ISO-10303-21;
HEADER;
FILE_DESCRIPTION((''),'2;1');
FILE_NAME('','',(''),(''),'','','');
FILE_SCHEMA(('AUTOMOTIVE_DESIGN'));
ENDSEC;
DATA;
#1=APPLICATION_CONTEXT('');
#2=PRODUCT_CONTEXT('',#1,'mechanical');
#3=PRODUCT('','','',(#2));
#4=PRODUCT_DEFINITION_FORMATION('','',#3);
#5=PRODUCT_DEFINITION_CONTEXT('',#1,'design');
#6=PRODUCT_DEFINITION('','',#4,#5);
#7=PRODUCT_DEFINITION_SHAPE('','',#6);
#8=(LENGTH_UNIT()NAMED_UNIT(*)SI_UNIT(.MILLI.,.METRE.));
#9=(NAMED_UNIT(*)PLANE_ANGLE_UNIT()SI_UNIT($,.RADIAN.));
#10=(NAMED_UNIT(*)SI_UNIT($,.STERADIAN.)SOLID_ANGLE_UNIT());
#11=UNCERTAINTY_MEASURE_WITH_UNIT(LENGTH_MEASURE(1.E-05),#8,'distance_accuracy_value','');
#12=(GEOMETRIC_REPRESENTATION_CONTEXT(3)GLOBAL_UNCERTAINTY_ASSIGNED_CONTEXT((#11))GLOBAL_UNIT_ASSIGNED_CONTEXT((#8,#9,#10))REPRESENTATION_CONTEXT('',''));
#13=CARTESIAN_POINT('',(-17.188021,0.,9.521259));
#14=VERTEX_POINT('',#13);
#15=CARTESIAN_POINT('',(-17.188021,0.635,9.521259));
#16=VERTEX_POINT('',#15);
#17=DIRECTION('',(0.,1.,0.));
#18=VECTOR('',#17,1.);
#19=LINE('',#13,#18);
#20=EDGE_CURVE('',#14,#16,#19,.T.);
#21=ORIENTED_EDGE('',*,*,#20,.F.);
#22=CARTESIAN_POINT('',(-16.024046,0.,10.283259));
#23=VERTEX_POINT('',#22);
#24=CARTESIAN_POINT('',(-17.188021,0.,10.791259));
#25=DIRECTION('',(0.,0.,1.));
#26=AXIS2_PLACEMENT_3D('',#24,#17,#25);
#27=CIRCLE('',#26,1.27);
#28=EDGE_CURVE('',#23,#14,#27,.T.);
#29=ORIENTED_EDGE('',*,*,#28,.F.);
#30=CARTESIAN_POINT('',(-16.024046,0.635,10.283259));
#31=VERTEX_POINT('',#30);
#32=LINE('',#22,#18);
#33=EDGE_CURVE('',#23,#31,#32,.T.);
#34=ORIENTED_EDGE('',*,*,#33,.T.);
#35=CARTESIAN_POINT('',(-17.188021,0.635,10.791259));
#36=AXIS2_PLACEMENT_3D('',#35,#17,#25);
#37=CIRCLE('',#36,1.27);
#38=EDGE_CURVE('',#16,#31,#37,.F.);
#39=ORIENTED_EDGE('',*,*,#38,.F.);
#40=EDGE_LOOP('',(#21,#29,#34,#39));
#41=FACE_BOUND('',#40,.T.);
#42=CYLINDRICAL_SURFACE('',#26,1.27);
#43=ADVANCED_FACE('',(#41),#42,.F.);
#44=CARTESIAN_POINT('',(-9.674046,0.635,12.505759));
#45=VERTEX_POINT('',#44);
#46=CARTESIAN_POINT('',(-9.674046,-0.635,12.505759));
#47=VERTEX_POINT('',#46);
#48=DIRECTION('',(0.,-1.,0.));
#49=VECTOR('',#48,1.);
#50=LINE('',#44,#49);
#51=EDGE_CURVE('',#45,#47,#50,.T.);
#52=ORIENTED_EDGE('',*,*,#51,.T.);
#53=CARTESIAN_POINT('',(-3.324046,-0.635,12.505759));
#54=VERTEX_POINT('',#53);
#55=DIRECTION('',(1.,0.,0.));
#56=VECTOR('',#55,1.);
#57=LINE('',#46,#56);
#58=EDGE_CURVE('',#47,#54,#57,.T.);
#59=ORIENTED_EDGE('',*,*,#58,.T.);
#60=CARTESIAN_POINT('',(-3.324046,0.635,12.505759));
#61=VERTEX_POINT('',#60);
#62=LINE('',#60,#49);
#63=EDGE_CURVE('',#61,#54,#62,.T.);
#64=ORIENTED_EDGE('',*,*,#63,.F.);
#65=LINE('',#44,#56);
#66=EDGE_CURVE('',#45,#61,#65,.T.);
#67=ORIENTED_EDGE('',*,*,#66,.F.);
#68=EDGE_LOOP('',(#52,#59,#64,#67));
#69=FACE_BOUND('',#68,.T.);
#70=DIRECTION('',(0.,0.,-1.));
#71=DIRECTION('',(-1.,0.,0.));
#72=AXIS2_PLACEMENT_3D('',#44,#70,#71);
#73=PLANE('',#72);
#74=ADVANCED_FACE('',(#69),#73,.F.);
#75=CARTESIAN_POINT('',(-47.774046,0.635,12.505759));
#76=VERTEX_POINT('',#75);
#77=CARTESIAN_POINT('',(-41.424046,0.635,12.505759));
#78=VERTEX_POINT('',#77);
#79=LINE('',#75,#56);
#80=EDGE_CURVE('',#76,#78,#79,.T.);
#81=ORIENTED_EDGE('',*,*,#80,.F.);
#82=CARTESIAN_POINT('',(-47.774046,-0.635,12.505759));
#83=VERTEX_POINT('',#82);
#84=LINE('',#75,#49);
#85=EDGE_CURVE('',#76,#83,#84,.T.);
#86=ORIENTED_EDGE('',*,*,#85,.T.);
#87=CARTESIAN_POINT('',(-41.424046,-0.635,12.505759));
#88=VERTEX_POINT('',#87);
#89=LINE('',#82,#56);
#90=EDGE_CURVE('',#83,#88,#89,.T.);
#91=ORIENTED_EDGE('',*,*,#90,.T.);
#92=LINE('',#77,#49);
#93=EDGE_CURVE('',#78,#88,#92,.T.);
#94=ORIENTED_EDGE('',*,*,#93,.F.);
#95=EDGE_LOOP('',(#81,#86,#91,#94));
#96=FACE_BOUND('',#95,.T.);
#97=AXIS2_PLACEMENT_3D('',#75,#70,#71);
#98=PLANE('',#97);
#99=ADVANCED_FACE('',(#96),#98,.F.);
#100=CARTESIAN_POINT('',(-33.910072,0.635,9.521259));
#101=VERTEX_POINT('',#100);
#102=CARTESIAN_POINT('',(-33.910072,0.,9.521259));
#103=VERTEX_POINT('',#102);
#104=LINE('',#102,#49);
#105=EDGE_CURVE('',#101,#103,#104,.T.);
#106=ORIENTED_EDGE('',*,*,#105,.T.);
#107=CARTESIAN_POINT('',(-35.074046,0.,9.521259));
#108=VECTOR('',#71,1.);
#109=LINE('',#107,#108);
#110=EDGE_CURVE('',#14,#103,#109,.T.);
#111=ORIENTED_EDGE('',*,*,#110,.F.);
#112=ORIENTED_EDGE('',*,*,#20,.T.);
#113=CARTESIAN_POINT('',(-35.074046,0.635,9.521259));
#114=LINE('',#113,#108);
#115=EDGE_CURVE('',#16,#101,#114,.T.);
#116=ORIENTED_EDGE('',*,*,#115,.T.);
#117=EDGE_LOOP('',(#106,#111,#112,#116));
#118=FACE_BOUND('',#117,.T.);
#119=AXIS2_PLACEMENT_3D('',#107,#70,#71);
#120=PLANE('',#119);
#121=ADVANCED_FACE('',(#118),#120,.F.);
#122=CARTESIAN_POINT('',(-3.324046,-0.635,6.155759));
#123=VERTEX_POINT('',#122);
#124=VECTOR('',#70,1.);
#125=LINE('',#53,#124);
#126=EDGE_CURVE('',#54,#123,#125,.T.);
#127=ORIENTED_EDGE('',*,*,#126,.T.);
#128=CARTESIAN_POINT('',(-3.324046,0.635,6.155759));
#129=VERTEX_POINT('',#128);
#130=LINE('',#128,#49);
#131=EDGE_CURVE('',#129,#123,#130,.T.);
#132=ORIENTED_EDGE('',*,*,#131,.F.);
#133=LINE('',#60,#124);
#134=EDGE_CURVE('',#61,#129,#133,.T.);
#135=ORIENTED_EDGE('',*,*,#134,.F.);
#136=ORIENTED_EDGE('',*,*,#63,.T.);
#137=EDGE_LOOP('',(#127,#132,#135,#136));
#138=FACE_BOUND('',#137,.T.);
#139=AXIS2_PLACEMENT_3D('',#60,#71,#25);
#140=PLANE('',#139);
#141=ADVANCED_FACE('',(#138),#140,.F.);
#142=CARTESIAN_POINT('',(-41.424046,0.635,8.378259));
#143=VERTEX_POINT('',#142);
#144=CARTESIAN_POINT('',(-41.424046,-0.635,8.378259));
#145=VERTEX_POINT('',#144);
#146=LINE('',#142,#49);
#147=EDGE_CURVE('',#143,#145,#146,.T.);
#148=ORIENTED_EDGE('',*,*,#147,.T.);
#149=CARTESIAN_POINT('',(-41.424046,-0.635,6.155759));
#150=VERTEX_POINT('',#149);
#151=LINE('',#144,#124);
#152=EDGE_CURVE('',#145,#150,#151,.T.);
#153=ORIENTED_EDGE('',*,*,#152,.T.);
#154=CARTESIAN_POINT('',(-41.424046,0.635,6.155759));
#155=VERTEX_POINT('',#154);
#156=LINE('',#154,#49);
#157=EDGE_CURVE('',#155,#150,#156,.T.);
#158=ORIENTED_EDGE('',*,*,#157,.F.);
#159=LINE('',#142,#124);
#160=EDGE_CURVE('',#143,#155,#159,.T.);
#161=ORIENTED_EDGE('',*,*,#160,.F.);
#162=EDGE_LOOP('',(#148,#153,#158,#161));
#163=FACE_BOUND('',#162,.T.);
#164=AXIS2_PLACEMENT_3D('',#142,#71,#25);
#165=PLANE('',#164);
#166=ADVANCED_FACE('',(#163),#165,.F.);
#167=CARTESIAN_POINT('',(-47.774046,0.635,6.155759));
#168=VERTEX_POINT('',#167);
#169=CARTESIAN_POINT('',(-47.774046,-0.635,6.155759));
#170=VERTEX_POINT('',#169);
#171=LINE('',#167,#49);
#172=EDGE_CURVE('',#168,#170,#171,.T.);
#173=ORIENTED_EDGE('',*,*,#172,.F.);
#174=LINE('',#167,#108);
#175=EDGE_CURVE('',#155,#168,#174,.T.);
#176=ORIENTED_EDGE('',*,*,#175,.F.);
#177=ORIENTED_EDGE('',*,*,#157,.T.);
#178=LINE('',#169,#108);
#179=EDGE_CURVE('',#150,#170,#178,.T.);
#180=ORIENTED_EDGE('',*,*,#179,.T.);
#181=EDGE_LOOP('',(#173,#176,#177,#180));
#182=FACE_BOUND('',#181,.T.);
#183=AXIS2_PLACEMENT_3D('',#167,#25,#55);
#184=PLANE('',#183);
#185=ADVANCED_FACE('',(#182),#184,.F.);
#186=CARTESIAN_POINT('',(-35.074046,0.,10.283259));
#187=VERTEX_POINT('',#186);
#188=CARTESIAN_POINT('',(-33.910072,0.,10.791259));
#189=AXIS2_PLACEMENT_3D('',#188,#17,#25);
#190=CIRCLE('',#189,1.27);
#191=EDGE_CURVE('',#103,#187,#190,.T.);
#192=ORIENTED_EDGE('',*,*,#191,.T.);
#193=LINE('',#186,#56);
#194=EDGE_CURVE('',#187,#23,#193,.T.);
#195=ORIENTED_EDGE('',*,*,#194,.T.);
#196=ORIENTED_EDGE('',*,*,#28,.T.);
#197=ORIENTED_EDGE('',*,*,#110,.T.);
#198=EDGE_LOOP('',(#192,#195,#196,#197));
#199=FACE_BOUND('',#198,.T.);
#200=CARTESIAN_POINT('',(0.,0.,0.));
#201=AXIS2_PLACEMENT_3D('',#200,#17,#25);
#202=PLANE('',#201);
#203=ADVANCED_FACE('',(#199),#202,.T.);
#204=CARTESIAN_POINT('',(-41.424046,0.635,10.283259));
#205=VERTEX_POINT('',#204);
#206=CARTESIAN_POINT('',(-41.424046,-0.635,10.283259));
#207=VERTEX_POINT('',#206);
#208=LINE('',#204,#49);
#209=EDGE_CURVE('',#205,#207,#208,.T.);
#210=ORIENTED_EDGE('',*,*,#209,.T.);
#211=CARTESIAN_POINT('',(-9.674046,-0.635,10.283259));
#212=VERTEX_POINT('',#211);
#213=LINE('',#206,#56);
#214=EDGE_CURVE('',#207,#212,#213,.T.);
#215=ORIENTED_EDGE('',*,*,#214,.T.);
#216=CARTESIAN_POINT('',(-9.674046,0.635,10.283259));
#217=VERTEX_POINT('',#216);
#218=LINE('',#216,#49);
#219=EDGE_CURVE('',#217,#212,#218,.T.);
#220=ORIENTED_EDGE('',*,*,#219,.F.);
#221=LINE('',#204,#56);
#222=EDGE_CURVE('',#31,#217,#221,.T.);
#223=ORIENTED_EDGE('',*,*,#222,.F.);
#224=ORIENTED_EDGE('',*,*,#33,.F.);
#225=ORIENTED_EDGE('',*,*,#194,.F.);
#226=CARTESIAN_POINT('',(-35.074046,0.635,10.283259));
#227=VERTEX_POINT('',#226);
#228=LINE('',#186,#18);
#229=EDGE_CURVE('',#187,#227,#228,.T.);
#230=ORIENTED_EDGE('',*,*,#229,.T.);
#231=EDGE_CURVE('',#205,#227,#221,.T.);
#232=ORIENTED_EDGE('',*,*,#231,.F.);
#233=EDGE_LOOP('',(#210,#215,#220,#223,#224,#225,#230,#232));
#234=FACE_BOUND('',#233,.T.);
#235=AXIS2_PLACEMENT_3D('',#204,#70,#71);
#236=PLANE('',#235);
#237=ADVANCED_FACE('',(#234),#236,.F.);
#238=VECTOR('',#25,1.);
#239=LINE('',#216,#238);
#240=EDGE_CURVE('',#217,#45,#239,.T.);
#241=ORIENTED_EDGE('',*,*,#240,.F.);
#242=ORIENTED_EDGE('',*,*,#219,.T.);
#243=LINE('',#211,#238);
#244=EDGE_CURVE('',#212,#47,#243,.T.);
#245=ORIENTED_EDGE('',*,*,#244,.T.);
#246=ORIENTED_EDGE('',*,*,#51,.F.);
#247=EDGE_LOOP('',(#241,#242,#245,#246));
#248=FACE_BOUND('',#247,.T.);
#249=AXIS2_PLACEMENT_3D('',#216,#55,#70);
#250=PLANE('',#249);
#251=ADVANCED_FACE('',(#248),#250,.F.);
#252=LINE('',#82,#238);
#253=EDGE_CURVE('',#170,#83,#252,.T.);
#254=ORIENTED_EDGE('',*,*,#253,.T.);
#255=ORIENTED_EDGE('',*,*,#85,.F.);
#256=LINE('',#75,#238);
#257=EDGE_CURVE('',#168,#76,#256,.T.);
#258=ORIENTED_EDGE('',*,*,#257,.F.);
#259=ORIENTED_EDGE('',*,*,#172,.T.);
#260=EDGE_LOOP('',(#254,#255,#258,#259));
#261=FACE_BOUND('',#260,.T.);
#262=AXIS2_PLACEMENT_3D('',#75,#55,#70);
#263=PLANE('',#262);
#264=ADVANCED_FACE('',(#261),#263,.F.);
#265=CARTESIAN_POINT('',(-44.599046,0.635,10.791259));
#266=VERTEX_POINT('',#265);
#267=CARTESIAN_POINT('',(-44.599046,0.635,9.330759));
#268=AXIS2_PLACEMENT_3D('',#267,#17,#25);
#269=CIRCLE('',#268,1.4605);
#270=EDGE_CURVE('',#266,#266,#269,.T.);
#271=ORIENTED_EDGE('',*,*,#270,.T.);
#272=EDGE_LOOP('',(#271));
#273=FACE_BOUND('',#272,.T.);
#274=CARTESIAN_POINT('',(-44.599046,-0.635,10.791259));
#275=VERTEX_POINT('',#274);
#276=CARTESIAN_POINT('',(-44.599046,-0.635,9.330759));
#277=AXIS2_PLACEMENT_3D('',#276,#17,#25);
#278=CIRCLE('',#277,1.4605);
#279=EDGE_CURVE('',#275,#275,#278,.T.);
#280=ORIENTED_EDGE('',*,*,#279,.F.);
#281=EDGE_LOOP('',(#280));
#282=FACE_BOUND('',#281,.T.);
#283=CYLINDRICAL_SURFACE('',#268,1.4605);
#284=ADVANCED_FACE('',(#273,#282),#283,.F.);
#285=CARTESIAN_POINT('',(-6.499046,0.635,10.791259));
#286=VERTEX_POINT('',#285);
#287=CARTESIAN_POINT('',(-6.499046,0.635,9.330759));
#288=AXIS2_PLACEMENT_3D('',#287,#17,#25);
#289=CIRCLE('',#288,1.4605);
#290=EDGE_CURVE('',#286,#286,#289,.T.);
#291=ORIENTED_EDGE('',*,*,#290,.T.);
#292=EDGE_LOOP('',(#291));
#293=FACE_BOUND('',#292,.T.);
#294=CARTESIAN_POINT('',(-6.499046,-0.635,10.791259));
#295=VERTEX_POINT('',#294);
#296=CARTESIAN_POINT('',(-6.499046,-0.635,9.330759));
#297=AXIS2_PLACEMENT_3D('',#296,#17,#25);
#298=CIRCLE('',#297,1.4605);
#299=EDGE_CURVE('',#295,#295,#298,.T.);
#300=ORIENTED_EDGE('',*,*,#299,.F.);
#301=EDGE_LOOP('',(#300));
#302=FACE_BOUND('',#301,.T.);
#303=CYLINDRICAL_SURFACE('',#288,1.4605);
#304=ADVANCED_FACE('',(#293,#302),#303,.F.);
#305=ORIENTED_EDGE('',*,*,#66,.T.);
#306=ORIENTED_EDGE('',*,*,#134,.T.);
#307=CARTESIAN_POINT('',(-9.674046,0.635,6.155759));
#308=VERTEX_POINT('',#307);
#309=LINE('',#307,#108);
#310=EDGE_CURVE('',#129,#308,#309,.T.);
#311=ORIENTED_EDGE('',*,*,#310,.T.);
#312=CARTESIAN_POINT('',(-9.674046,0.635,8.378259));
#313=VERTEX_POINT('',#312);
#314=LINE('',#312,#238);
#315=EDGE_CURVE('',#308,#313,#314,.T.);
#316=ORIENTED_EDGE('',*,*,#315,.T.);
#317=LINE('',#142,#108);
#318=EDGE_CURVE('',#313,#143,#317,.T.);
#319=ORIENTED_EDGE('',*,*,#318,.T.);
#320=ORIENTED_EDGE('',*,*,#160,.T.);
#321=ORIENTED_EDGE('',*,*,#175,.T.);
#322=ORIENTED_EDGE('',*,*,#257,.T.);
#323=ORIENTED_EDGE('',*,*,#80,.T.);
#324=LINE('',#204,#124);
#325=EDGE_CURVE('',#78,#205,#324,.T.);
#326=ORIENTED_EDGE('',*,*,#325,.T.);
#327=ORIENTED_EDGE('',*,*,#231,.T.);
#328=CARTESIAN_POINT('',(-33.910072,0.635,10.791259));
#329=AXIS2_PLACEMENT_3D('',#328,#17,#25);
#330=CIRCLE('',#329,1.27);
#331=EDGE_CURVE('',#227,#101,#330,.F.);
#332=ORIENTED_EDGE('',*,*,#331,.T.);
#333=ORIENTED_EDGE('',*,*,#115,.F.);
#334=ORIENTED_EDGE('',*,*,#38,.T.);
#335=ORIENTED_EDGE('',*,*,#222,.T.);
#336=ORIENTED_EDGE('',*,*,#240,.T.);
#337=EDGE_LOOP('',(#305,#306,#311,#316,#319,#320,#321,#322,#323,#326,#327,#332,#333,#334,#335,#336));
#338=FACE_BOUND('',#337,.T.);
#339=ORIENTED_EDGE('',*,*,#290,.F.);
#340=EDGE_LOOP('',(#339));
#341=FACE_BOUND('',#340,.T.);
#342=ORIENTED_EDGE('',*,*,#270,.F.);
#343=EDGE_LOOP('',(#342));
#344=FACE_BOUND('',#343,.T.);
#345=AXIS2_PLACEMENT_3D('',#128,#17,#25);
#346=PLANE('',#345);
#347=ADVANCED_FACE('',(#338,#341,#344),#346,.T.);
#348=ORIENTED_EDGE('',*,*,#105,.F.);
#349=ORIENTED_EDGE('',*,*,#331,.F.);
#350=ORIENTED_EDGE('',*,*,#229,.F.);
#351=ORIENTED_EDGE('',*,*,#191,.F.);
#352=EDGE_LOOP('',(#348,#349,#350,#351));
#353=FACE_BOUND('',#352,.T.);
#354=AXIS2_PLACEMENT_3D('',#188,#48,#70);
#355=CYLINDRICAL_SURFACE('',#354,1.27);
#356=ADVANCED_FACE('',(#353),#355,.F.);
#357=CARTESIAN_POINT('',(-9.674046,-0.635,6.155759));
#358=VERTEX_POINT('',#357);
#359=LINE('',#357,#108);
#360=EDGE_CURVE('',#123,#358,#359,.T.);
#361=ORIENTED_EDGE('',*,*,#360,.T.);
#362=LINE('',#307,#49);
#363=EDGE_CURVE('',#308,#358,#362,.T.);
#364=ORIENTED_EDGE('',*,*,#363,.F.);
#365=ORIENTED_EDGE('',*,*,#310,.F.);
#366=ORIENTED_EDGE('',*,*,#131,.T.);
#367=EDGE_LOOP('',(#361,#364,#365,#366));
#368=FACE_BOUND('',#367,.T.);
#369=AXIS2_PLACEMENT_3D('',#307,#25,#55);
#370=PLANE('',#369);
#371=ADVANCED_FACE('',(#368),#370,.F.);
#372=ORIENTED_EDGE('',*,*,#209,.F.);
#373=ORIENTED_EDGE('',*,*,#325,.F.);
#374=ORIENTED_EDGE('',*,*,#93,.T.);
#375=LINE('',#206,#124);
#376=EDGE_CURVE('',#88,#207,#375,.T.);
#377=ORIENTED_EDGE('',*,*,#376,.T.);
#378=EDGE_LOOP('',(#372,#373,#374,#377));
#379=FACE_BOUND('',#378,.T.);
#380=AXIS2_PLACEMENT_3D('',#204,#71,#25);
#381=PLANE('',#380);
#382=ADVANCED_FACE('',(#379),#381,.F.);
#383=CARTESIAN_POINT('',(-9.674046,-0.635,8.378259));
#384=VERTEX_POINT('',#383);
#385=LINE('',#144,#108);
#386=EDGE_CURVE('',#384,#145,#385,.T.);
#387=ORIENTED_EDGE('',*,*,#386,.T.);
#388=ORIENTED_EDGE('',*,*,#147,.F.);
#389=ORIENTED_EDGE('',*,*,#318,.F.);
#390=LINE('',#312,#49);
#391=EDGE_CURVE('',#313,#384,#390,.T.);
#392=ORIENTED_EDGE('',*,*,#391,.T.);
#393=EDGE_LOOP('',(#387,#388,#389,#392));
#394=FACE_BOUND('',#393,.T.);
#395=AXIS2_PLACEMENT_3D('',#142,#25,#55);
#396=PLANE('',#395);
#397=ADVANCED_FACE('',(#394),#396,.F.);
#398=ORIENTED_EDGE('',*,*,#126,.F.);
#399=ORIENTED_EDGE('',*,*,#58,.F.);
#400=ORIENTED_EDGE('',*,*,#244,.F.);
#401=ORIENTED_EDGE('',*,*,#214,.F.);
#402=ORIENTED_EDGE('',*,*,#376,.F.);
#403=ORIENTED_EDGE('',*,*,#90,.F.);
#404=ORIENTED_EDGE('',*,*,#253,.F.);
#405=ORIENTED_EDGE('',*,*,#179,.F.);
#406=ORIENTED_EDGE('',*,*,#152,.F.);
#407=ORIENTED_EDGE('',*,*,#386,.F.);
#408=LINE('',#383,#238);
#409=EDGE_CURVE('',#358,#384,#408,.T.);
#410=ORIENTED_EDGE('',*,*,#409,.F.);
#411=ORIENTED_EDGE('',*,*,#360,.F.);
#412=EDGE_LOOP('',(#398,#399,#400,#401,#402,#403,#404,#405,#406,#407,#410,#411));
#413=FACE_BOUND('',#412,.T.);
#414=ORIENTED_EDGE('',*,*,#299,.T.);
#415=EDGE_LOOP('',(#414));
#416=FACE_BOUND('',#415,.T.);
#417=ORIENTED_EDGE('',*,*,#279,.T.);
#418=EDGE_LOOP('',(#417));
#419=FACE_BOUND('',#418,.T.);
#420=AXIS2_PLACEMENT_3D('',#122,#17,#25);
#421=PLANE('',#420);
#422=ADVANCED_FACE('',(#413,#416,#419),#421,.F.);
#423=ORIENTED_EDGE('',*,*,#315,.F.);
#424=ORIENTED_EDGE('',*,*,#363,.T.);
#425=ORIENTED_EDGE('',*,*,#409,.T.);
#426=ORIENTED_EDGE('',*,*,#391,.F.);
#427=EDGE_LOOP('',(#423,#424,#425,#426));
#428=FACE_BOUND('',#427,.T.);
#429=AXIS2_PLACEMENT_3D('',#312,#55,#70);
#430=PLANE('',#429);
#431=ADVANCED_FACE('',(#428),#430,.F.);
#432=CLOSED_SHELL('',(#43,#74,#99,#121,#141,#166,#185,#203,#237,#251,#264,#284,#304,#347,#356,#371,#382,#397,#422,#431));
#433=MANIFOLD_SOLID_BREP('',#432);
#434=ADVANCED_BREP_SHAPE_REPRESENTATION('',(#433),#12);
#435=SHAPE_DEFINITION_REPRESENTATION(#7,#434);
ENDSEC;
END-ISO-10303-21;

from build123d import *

# Parameters (mm, degrees)
BOSS_EXTRUDE1_DEPTH          = 0.635
F_97_0_0059_DIAMETER_HOLE1_D = 2.921
SKETCH5_W                    = 19.05
SKETCH5_H                    = 0.762
CUT_EXTRUDE1_DEPTH           = 0.635
FILLET4_R                    = 1.27
FILLET5_R                    = 1.27


with BuildPart() as part:
    # Sketch1 → Boss-Extrude1 (new, symmetric)
    with BuildSketch(Plane(origin=(0, 0, 0), x_dir=(1, 0, 0), z_dir=(0, 1, 0))):
        Polygon((-41.424046485, -10.283259465), (-41.424046485, -12.505759465), (-47.774046485, -12.505759465), (-47.774046485, -6.155759465), (-41.424046485, -6.155759465), (-41.424046485, -8.378259465), (-9.674046485, -8.378259465), (-9.674046485, -6.155759465), (-3.324046485, -6.155759465), (-3.324046485, -12.505759465), (-9.674046485, -12.505759465), (-9.674046485, -10.283259465), align=None)
    extrude(amount=BOSS_EXTRUDE1_DEPTH, both=True)

    # #97 (0.0059) Diameter Hole1 (through all)
    with Locations(Plane(origin=(0, 0.635, 0), x_dir=(-1, 0, 0), z_dir=(0, 1, 0))):
        with Locations((44.599046485, 9.330759465)):
            f_97_0_0059_diameter_hole1 = Hole(F_97_0_0059_DIAMETER_HOLE1_D / 2)

    # Mirror1: #97 (0.0059) Diameter Hole1 across plane
    add(f_97_0_0059_diameter_hole1.mirror(Plane(origin=(-25.549046485, 0, 0), x_dir=(0, 0, 1), z_dir=(1, 0, 0))), mode=Mode.SUBTRACT)

    # Sketch5 → Cut-Extrude1 (cut)
    with BuildSketch(Plane(origin=(0, 0.635, 0), x_dir=(1, 0, 0), z_dir=(0, 1, 0))):
        with Locations((-25.549046485, -9.902259465)):
            Rectangle(SKETCH5_W, SKETCH5_H)
    extrude(amount=-CUT_EXTRUDE1_DEPTH, mode=Mode.SUBTRACT)

    # Fillet4
    # the kernel refuses this fillet: 1.27 mm, written as the material it adds along each edge
    with BuildSketch(Plane(origin=(-35.074046485, 0.635, 9.521259465), x_dir=(0, 0, 1), z_dir=(0, -1, 0))) as fillet4_piece_1:
        with BuildLine():
            CenterArc((1.27, -1.163974227), FILLET4_R, 113.578178478, 66.421821522)
            Line((0, -1.163974227), (-0.0254, -1.163974227))
            Line((-0.0254, -1.163974227), (-0.0254, 0))
            Line((-0.0254, 0), (0, 0.0254))
            ThreePointArc((0, 0.0254), (0.381, 0.0254), (0.75184, 0.023279485))
            Line((0.75184, 0.023279485), (0.762, 0))
        make_face()
    extrude(amount=0.635)

    # Fillet5
    # the kernel refuses this fillet: 1.27 mm, written as the material it adds along each edge
    with BuildSketch(Plane(origin=(-16.024046485, 0.635, 9.521259465), x_dir=(-1, 0, 0), z_dir=(0, -1, 0))) as fillet5_piece_1:
        with BuildLine():
            CenterArc((1.163974227, -1.27), FILLET5_R, 90, 66.421821522)
            Line((0, -0.762), (-0.023279485, -0.75184))
            ThreePointArc((-0.023279485, -0.75184), (-0.0254, -0.381), (-0.0254, 0))
            Line((-0.0254, 0), (0, 0.0254))
            Line((0, 0.0254), (1.163974227, 0.0254))
            Line((1.163974227, 0.0254), (1.163974227, 0))
        make_face()
    extrude(amount=0.635)


solid = part.part
